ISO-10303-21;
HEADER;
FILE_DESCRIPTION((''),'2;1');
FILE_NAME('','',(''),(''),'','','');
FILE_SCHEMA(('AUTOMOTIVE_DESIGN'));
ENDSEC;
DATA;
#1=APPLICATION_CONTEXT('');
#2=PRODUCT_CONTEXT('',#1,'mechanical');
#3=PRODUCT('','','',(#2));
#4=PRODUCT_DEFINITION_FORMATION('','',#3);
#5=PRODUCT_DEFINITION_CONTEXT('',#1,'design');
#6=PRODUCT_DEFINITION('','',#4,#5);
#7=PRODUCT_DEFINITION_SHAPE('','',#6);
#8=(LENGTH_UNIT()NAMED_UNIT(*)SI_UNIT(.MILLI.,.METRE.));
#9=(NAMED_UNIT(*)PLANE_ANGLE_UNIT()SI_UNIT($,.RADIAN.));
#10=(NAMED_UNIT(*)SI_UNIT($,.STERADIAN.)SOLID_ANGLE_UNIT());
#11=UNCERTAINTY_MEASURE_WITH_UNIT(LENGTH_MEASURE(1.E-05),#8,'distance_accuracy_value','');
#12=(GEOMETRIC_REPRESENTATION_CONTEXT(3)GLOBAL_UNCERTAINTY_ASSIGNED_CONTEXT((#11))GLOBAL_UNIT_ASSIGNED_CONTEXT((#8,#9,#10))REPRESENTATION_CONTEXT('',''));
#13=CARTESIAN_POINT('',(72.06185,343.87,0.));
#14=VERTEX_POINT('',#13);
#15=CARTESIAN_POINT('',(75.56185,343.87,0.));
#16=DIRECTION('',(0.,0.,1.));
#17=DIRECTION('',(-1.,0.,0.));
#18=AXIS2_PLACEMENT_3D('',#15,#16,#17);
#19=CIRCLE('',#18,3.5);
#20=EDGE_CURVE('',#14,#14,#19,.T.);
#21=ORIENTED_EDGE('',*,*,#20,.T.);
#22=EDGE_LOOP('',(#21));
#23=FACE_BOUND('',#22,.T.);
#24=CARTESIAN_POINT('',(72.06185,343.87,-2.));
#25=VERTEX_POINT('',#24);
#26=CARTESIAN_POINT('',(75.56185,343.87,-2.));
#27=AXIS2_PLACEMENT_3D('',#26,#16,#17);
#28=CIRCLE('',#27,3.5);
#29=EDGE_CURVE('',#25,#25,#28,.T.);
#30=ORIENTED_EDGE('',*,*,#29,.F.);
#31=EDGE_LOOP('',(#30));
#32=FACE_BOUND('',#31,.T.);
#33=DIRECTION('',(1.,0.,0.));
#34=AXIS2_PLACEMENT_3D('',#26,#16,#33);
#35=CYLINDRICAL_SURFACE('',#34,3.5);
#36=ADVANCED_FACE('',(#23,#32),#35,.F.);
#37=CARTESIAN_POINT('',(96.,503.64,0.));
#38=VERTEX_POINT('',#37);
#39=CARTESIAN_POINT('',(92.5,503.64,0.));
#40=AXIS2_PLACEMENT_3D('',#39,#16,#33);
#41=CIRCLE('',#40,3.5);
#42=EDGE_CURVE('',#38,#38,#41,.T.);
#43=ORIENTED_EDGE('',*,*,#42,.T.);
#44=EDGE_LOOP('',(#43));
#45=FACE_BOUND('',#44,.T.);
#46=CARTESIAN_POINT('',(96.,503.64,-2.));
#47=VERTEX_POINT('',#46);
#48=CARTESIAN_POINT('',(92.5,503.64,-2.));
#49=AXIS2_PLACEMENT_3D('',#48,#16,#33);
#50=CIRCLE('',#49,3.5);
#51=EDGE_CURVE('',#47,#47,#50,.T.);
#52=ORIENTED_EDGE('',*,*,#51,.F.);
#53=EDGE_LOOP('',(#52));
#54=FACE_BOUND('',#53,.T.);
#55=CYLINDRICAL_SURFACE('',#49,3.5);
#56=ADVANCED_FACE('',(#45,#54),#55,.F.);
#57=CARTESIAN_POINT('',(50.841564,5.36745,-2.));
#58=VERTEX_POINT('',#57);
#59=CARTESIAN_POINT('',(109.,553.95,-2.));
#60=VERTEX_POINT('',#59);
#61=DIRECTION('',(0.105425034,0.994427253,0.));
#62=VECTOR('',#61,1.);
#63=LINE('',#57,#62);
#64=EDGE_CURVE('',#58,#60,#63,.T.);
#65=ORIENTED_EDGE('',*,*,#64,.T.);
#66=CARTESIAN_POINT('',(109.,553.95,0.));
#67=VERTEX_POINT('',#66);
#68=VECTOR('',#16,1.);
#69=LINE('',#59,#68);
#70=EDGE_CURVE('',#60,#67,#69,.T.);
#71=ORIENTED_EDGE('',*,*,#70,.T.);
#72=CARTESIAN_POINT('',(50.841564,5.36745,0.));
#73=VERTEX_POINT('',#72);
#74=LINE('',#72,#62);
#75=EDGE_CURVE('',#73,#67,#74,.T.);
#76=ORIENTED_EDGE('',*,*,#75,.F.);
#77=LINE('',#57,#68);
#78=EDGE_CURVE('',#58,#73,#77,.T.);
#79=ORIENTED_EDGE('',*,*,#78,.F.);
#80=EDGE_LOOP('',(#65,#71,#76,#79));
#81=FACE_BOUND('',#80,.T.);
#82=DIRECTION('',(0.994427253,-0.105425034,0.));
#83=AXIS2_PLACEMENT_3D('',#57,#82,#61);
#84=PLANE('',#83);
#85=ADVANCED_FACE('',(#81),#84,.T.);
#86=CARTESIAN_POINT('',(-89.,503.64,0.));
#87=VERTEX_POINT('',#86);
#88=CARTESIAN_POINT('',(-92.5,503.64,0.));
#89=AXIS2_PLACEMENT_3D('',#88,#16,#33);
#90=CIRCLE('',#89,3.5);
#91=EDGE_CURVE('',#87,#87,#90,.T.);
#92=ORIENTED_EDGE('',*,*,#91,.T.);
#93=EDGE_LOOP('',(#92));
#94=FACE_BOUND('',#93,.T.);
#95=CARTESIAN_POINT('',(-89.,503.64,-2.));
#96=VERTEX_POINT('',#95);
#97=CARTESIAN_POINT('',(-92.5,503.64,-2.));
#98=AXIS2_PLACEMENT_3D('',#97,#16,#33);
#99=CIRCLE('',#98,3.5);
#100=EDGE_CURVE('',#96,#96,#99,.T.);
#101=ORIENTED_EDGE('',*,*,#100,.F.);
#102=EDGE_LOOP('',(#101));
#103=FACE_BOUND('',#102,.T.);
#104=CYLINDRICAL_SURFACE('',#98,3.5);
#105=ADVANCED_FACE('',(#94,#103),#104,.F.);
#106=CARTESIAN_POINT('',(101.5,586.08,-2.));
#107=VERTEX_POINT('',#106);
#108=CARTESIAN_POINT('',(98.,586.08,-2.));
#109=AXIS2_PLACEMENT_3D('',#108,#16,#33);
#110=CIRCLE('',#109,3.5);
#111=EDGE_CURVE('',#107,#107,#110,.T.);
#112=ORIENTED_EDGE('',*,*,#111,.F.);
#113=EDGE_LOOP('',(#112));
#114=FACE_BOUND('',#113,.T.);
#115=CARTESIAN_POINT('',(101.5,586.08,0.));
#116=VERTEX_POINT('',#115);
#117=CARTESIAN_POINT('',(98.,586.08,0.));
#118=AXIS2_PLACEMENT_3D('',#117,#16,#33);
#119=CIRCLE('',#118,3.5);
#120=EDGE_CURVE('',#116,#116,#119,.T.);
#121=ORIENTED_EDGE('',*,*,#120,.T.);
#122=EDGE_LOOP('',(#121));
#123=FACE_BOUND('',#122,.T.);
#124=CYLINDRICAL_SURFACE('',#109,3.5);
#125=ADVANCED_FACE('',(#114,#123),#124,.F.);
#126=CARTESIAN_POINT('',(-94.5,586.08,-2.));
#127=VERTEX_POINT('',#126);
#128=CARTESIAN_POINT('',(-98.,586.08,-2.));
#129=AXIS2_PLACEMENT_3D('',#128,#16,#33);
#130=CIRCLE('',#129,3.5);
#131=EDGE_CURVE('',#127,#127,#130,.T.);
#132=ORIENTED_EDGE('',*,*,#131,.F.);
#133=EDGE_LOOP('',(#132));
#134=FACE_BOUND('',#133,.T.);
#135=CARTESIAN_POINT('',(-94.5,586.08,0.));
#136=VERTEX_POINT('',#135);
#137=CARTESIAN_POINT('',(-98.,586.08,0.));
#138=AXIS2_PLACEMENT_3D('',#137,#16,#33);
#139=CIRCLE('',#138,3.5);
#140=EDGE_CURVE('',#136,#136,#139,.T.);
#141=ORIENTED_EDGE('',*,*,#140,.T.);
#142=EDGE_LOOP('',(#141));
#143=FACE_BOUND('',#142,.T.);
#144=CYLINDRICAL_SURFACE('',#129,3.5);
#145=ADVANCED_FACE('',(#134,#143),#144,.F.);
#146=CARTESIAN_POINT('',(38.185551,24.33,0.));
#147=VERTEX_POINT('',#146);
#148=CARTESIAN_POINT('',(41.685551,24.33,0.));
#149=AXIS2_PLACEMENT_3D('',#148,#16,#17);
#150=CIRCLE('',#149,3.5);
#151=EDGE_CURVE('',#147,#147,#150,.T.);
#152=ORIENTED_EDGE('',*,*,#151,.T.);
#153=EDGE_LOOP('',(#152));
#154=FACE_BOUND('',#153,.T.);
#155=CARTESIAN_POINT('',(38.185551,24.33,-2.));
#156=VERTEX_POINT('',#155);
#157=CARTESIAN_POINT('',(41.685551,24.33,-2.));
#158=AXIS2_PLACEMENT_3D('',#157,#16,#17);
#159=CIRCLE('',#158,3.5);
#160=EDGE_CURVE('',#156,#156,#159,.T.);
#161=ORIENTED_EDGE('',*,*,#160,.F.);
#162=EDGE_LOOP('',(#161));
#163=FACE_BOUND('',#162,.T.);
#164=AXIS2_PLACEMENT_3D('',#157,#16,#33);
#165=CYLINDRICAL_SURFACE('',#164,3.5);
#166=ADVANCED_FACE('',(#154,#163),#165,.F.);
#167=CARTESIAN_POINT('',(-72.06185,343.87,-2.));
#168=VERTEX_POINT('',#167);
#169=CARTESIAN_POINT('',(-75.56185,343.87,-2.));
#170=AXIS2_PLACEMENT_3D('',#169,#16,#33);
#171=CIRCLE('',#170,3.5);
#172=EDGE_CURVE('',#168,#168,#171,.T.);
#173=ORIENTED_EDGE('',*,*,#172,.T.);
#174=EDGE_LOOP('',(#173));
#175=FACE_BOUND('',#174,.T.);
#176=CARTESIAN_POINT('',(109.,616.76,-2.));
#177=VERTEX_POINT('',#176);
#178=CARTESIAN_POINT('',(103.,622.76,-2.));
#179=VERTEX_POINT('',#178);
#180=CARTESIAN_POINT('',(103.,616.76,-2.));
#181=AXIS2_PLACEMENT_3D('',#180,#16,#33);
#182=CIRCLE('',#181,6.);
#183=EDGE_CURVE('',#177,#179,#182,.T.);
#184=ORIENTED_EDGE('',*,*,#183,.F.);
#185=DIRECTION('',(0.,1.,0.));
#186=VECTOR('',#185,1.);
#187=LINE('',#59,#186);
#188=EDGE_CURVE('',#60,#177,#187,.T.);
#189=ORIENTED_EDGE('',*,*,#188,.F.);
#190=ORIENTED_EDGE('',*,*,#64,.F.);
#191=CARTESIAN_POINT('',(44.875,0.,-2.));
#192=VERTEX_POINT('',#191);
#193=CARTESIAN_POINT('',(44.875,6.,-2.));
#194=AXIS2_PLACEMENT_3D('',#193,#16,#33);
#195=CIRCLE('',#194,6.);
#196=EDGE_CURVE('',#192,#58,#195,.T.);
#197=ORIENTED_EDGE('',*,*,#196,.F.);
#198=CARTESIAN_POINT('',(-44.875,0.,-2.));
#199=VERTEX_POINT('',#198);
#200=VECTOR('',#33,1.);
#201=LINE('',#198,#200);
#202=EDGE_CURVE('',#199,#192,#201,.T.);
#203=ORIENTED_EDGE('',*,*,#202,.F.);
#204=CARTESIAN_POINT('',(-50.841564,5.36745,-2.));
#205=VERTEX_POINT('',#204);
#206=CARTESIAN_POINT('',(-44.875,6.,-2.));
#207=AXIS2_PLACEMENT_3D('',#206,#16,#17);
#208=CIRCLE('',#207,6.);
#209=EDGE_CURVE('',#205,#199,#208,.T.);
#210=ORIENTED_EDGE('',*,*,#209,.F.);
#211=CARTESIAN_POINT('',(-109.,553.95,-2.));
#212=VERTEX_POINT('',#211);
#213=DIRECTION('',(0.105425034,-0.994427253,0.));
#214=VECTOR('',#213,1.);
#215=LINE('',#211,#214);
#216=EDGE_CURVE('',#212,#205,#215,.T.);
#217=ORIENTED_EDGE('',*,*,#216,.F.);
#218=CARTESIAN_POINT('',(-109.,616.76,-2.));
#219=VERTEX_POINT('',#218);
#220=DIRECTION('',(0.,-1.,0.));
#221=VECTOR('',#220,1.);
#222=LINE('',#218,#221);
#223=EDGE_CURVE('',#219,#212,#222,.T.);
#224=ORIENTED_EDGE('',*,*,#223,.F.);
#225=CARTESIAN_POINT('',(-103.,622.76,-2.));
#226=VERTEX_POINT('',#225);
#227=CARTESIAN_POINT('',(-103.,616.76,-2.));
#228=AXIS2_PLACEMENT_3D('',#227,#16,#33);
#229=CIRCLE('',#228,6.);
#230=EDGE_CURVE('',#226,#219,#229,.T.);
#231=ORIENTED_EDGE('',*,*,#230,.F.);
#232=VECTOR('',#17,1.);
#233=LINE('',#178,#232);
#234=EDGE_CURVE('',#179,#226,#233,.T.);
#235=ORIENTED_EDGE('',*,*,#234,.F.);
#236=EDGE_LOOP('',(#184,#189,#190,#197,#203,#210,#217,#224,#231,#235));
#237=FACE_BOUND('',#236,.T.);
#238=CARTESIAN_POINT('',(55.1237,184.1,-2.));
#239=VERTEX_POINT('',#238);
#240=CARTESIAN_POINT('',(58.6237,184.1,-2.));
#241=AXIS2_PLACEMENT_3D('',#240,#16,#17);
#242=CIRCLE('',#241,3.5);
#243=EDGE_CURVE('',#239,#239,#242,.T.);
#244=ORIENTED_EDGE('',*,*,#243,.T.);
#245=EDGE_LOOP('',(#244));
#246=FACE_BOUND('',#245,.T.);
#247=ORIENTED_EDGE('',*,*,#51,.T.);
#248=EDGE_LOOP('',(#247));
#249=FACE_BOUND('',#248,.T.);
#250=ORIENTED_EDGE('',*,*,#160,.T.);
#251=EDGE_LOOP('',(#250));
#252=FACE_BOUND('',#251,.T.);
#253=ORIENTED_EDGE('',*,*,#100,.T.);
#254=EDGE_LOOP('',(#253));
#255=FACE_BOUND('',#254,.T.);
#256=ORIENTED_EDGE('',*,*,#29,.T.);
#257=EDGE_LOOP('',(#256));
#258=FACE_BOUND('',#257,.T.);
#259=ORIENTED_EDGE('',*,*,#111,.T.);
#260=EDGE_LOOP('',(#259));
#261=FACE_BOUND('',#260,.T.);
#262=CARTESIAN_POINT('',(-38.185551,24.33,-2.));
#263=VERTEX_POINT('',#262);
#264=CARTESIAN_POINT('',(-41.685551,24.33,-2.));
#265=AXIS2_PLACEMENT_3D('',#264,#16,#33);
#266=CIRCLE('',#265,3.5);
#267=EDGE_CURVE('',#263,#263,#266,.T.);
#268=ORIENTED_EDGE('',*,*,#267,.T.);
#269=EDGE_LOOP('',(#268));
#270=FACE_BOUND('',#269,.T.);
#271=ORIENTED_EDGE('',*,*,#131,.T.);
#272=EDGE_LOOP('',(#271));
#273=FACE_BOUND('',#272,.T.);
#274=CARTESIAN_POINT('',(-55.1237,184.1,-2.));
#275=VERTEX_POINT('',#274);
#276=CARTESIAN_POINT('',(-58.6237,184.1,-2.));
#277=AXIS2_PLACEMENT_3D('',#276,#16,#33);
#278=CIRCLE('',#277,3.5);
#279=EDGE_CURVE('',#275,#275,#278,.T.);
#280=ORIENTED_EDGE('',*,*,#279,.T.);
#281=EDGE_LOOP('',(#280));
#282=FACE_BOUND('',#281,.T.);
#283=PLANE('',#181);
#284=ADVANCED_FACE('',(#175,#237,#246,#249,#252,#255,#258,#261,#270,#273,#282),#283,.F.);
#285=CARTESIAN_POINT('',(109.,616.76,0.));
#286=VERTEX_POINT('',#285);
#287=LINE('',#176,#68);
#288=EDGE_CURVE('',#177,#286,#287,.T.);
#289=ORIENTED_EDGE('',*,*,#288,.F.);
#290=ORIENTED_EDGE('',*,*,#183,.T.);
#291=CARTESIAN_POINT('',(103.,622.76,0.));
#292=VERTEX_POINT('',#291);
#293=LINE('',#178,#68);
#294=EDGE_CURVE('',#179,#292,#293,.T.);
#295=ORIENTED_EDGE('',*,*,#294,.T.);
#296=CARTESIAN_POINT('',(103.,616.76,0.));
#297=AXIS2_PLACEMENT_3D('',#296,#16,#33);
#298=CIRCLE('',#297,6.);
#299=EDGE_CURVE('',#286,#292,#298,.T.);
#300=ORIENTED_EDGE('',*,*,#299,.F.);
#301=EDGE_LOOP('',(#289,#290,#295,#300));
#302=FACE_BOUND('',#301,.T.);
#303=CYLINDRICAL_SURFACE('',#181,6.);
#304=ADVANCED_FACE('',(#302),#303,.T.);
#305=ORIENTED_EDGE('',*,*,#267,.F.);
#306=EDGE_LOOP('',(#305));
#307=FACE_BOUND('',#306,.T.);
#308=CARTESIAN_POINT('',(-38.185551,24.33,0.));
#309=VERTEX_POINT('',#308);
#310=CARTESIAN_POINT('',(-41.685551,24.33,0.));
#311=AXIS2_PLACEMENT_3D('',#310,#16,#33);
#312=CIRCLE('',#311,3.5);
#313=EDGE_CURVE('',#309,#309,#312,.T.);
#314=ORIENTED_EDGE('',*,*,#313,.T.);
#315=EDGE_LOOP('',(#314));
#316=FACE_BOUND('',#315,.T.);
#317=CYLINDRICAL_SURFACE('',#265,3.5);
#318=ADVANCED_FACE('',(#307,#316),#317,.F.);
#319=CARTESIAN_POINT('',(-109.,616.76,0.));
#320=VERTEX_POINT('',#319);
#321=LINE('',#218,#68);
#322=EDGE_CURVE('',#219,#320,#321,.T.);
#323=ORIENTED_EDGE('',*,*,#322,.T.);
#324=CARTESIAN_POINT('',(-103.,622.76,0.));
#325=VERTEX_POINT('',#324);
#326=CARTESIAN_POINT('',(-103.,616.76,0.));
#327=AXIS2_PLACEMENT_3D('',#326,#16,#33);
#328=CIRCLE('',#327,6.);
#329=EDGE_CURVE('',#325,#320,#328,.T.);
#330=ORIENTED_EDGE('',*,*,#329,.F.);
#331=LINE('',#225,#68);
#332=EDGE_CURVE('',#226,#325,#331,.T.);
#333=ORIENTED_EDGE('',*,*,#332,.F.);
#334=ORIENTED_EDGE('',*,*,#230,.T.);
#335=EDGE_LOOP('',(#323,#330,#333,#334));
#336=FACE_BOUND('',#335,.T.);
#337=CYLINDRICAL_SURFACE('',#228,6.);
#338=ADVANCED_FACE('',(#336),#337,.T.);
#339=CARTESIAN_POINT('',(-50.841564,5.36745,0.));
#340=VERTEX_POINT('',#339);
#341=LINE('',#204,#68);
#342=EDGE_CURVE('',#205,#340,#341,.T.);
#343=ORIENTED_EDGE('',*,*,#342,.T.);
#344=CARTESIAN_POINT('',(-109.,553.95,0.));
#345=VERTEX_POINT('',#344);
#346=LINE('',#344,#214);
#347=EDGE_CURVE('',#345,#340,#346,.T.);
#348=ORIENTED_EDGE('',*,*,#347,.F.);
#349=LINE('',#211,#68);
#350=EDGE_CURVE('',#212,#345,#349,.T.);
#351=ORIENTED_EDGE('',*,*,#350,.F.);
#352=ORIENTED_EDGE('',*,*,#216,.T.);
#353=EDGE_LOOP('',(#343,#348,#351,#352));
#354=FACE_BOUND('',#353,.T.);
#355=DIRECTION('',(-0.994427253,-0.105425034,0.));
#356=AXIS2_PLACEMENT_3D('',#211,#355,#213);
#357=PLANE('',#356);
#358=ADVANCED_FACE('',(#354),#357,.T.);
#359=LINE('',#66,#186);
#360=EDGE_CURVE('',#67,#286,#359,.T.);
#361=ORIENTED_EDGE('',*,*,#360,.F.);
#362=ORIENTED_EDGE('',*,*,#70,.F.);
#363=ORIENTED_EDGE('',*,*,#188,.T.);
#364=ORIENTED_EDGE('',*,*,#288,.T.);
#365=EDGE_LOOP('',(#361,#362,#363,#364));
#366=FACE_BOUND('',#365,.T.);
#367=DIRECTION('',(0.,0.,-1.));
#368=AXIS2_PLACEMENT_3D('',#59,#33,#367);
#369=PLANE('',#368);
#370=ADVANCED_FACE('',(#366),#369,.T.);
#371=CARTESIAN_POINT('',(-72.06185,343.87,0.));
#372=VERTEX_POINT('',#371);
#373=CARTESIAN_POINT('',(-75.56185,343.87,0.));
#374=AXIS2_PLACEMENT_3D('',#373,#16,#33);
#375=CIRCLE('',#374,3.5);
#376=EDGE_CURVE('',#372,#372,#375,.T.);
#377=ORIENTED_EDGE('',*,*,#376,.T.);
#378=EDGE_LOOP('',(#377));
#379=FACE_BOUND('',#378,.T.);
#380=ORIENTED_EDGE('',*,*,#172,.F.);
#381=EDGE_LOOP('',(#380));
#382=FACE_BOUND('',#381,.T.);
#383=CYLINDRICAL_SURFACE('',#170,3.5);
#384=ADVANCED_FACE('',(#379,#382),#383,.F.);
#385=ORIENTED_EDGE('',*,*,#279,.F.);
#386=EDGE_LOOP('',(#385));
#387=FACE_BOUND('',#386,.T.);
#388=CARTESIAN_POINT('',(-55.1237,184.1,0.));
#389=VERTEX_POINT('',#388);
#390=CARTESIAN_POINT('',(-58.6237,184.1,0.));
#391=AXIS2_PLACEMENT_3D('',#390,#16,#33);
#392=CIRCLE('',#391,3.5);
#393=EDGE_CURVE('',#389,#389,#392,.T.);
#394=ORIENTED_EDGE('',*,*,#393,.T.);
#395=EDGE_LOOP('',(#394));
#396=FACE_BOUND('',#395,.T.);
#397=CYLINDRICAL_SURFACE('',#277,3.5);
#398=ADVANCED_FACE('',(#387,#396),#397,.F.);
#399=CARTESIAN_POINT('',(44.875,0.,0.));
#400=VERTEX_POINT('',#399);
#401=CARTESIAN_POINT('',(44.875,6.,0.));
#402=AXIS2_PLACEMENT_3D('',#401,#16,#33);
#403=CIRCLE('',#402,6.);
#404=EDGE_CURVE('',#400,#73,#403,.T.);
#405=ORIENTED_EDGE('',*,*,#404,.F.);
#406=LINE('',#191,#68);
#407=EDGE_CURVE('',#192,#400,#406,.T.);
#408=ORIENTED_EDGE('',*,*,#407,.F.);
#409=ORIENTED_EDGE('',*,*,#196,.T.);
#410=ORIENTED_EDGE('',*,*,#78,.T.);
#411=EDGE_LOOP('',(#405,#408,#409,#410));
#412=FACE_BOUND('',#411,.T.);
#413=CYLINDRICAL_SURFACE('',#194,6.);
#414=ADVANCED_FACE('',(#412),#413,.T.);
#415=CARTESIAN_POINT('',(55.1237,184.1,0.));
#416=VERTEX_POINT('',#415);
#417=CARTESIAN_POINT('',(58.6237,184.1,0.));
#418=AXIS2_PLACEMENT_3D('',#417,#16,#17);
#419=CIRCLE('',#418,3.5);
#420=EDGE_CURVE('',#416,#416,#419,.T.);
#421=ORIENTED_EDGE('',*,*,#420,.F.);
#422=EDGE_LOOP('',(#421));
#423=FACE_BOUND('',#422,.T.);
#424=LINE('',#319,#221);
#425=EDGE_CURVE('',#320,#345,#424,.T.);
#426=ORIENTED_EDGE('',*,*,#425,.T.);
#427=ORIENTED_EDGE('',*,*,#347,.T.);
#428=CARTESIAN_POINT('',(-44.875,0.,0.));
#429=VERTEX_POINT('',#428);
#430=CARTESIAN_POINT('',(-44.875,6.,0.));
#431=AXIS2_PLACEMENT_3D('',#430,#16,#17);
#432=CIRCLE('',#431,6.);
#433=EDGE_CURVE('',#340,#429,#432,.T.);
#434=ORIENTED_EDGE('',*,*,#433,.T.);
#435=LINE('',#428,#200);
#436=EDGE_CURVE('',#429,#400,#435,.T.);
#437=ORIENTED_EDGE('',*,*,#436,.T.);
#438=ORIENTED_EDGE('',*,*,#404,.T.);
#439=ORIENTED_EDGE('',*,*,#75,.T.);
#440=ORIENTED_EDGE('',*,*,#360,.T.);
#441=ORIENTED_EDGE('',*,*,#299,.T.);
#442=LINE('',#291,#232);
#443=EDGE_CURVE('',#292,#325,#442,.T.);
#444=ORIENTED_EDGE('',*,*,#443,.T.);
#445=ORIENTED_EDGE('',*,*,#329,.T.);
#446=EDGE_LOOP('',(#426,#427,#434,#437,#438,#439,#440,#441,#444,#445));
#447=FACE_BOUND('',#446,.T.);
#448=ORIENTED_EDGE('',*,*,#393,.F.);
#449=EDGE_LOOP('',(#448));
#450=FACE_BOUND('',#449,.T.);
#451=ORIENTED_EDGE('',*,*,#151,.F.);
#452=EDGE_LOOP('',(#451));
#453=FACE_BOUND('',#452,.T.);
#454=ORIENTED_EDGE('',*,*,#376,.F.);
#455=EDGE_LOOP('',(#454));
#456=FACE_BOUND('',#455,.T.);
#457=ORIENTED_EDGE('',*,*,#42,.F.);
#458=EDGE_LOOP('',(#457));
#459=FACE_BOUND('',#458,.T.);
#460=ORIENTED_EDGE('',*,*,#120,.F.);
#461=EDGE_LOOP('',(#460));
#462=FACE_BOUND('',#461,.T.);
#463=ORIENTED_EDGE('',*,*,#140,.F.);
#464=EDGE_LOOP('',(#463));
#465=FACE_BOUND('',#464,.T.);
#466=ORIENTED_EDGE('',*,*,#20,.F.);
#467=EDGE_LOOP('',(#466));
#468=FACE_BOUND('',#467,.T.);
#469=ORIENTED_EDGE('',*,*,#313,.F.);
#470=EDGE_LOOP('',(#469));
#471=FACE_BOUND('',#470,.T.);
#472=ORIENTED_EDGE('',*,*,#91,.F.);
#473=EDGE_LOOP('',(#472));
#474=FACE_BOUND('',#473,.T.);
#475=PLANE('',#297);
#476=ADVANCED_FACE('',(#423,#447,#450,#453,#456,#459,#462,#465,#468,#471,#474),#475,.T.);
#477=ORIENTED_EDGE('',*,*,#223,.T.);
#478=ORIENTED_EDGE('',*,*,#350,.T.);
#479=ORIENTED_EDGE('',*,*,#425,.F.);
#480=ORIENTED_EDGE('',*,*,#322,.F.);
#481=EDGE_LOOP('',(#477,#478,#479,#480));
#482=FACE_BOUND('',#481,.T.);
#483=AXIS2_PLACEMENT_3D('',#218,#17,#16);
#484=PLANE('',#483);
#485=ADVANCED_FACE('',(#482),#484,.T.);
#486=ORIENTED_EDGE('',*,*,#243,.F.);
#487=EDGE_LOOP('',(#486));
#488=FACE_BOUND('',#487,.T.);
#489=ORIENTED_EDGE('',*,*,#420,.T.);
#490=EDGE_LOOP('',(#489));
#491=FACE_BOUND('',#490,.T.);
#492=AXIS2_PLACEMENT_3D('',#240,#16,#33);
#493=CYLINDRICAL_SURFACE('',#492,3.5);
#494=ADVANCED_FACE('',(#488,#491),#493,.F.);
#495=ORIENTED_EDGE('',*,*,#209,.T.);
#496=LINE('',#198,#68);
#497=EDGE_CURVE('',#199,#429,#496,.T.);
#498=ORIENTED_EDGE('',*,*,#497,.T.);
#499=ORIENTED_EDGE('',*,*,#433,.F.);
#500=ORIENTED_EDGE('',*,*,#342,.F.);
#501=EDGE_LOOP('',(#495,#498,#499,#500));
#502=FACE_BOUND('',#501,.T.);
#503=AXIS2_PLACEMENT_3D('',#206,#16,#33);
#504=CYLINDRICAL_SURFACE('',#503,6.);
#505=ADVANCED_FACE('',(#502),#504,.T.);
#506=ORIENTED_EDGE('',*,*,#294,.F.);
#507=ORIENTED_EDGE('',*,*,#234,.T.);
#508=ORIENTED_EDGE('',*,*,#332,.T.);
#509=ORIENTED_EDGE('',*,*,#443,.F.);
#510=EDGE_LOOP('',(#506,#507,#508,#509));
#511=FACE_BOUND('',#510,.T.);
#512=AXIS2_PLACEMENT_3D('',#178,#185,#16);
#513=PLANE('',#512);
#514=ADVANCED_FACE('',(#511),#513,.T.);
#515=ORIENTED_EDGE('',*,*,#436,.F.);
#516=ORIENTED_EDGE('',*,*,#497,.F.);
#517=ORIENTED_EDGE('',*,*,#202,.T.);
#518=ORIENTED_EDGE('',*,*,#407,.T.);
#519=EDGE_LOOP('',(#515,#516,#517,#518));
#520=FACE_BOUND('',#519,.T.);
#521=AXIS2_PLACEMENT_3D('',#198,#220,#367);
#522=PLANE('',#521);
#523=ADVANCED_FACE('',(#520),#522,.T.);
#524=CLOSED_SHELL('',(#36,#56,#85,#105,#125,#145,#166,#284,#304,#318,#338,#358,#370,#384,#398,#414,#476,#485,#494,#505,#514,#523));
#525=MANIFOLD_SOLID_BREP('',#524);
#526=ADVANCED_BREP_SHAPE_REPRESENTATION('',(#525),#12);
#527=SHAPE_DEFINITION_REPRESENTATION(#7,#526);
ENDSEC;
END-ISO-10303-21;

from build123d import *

# Parameters (mm, degrees)
ESBO_O1_R          = 3.5
FLANGE_BASE1_DEPTH = 2


# Sheet-metal steps are written as plain solids
with BuildPart() as part:
    # Esboço1 → Flange-base1 (new body)
    with BuildSketch(Plane.XY):
        with BuildLine():
            Line((-44.875, 0), (44.875, 0))
            ThreePointArc((44.875, 0), (48.887773278, 1.539321731), (50.84156352, 5.367449793))
            Line((50.84156352, 5.367449793), (109, 553.95))
            Line((109, 553.95), (109, 616.76))
            ThreePointArc((109, 616.76), (107.242640687, 621.002640687), (103, 622.76))
            Line((103, 622.76), (-103, 622.76))
            ThreePointArc((-103, 622.76), (-107.242640687, 621.002640687), (-109, 616.76))
            Line((-109, 616.76), (-109, 553.95))
            Line((-109, 553.95), (-50.84156352, 5.367449793))
            ThreePointArc((-50.84156352, 5.367449793), (-48.887773278, 1.539321731), (-44.875, 0))
        make_face()
        with Locations((-98, 586.08)):
            Circle(ESBO_O1_R, mode=Mode.SUBTRACT)
        with Locations((98, 586.08)):
            Circle(ESBO_O1_R, mode=Mode.SUBTRACT)
        with Locations((-92.5, 503.64)):
            Circle(ESBO_O1_R, mode=Mode.SUBTRACT)
        with Locations((92.5, 503.64)):
            Circle(ESBO_O1_R, mode=Mode.SUBTRACT)
        with Locations((-75.56185023, 343.87)):
            Circle(ESBO_O1_R, mode=Mode.SUBTRACT)
        with Locations((-58.623700461, 184.1)):
            Circle(ESBO_O1_R, mode=Mode.SUBTRACT)
        with Locations((-41.685550691, 24.33)):
            Circle(ESBO_O1_R, mode=Mode.SUBTRACT)
        with Locations(Location((41.685550691, 24.33, 0), (0, 0, 180))):
            Circle(ESBO_O1_R, mode=Mode.SUBTRACT)
        with Locations(Location((58.623700461, 184.1, 0), (0, 0, 180))):
            Circle(ESBO_O1_R, mode=Mode.SUBTRACT)
        with Locations(Location((75.56185023, 343.87, 0), (0, 0, 180))):
            Circle(ESBO_O1_R, mode=Mode.SUBTRACT)
    extrude(amount=-FLANGE_BASE1_DEPTH)


solid = part.part
